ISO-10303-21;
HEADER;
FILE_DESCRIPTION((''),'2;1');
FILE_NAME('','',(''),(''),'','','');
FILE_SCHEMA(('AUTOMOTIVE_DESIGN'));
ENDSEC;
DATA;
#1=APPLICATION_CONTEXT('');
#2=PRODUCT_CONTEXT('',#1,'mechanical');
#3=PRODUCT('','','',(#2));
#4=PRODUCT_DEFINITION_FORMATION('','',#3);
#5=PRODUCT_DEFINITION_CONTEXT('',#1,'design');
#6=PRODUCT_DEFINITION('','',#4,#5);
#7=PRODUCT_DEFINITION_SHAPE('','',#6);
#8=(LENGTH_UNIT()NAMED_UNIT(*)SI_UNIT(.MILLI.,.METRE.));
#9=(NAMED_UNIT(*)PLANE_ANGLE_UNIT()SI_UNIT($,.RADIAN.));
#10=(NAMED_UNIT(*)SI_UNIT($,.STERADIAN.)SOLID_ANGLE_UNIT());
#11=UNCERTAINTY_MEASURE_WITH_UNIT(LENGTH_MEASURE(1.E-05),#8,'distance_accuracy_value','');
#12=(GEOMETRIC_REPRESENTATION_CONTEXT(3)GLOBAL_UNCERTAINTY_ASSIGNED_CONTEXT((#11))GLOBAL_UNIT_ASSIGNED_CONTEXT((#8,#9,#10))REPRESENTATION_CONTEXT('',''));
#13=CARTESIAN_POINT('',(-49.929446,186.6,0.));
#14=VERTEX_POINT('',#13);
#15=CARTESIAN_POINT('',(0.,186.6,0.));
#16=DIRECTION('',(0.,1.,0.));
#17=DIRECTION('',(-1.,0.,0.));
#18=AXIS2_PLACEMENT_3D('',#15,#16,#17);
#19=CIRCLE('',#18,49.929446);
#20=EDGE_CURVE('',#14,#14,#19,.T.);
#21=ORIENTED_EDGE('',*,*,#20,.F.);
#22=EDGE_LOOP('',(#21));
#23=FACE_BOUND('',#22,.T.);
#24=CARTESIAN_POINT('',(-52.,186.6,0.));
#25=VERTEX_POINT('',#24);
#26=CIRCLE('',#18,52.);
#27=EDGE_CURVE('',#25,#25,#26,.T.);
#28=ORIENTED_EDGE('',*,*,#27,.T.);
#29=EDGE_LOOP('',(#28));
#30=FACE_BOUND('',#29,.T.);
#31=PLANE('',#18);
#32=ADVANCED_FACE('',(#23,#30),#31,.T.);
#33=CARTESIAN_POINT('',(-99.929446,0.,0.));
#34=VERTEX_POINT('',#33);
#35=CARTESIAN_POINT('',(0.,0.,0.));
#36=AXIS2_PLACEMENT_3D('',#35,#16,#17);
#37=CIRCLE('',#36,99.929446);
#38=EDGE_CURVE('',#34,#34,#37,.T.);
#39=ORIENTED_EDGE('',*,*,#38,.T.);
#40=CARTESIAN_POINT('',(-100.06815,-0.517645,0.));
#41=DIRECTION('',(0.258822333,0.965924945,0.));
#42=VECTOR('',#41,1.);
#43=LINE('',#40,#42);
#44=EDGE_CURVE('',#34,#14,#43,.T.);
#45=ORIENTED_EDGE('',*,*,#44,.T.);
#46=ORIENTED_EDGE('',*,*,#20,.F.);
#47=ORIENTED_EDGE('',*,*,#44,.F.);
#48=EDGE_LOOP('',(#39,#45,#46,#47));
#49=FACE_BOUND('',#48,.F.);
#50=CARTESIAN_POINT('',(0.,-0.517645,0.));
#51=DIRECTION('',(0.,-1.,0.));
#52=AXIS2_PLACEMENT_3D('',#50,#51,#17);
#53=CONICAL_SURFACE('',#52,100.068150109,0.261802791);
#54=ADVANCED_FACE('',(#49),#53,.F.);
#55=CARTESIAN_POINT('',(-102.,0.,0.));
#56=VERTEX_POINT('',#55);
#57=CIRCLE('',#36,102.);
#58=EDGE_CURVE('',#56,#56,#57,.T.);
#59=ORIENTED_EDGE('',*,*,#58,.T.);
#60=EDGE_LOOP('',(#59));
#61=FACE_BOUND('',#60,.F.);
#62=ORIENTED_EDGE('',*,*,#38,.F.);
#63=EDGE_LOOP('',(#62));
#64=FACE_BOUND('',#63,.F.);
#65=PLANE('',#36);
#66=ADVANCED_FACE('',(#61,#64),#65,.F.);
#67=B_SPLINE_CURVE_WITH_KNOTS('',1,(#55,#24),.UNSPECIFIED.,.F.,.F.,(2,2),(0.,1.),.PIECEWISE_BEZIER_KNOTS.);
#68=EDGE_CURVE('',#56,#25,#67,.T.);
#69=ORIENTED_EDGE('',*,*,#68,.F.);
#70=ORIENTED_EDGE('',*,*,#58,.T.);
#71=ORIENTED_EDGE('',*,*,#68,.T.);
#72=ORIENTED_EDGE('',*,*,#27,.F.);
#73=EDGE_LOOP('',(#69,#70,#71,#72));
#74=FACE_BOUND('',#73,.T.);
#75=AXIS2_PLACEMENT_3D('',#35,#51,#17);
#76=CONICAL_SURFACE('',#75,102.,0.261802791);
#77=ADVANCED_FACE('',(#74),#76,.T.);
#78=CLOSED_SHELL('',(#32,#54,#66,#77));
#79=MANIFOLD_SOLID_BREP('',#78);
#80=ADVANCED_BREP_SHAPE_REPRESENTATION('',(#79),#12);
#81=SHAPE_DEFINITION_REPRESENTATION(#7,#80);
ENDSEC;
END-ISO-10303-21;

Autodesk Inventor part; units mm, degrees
ref_plane "YZ Plane" through (0, 0, 0) normal (1, 0, 0) x (0, 1, 0)
ref_plane "XY Plane" through (0, 0, 0) normal (0, 0, 1) x (1, 0, 0)
sketch "Szkic6" plane through (0, 0, 0) normal (0, 1, 0) x (-1, 0, 0)
  circle A0 centre (0, 0) radius 102
  dimension "d33" = 204
ref_plane "Płaszczyzna konstrukcyjna1" through (0, 186.6, 0) normal (0, 1, 0) x (-1, 0, 0)
sketch "Szkic7" plane through (0, 186.6, 0) normal (0, 1, 0) x (-1, 0, 0)
  circle A0 centre (0, 0) radius 52
  dimension "d35" = 104
loft "Wyciągnięcie złożone1" add profiles "Szkic6", "Szkic7"
shell "Skorupa1" thickness 2 removed faces 2 at (-18.5271, 186.6, 25.061) at (-23.2432, 0, 54.3964)
equation "\"d33\" = OD1"
equation "\"d35\" = OD2"
equation "\"d52\" = THK"
equation "\"SzerokośćGięciaPodcięcia\" = Grubość"
equation "\"RozmiarPodcięciaNarożnika\" = 4 * Grubość"
equation "\"PromieńPrzejścia\" = PromieńGięcia"
equation "\"Rozmiar_promienia_Jacobiego\" = PromieńGięcia"
equation "\"Wielk_odstępu\" = Grubość"
equation "\"d2\" = PromieńGięcia"
equation "\"d23\" = PromieńGięcia"
equation "\"OD1\" = 204"
equation "\"OD2\" = 104"
equation "\"L\" = 186.6"
equation "\"THK\" = 2"
equation "\"d34\" = L"
equation "\"Grubość\" = 1.5"
equation "\"PromieńGięcia\" = 3"
properties part number "Redukcja symetryczna Ø204x104x2 L=186,6" material "304"
